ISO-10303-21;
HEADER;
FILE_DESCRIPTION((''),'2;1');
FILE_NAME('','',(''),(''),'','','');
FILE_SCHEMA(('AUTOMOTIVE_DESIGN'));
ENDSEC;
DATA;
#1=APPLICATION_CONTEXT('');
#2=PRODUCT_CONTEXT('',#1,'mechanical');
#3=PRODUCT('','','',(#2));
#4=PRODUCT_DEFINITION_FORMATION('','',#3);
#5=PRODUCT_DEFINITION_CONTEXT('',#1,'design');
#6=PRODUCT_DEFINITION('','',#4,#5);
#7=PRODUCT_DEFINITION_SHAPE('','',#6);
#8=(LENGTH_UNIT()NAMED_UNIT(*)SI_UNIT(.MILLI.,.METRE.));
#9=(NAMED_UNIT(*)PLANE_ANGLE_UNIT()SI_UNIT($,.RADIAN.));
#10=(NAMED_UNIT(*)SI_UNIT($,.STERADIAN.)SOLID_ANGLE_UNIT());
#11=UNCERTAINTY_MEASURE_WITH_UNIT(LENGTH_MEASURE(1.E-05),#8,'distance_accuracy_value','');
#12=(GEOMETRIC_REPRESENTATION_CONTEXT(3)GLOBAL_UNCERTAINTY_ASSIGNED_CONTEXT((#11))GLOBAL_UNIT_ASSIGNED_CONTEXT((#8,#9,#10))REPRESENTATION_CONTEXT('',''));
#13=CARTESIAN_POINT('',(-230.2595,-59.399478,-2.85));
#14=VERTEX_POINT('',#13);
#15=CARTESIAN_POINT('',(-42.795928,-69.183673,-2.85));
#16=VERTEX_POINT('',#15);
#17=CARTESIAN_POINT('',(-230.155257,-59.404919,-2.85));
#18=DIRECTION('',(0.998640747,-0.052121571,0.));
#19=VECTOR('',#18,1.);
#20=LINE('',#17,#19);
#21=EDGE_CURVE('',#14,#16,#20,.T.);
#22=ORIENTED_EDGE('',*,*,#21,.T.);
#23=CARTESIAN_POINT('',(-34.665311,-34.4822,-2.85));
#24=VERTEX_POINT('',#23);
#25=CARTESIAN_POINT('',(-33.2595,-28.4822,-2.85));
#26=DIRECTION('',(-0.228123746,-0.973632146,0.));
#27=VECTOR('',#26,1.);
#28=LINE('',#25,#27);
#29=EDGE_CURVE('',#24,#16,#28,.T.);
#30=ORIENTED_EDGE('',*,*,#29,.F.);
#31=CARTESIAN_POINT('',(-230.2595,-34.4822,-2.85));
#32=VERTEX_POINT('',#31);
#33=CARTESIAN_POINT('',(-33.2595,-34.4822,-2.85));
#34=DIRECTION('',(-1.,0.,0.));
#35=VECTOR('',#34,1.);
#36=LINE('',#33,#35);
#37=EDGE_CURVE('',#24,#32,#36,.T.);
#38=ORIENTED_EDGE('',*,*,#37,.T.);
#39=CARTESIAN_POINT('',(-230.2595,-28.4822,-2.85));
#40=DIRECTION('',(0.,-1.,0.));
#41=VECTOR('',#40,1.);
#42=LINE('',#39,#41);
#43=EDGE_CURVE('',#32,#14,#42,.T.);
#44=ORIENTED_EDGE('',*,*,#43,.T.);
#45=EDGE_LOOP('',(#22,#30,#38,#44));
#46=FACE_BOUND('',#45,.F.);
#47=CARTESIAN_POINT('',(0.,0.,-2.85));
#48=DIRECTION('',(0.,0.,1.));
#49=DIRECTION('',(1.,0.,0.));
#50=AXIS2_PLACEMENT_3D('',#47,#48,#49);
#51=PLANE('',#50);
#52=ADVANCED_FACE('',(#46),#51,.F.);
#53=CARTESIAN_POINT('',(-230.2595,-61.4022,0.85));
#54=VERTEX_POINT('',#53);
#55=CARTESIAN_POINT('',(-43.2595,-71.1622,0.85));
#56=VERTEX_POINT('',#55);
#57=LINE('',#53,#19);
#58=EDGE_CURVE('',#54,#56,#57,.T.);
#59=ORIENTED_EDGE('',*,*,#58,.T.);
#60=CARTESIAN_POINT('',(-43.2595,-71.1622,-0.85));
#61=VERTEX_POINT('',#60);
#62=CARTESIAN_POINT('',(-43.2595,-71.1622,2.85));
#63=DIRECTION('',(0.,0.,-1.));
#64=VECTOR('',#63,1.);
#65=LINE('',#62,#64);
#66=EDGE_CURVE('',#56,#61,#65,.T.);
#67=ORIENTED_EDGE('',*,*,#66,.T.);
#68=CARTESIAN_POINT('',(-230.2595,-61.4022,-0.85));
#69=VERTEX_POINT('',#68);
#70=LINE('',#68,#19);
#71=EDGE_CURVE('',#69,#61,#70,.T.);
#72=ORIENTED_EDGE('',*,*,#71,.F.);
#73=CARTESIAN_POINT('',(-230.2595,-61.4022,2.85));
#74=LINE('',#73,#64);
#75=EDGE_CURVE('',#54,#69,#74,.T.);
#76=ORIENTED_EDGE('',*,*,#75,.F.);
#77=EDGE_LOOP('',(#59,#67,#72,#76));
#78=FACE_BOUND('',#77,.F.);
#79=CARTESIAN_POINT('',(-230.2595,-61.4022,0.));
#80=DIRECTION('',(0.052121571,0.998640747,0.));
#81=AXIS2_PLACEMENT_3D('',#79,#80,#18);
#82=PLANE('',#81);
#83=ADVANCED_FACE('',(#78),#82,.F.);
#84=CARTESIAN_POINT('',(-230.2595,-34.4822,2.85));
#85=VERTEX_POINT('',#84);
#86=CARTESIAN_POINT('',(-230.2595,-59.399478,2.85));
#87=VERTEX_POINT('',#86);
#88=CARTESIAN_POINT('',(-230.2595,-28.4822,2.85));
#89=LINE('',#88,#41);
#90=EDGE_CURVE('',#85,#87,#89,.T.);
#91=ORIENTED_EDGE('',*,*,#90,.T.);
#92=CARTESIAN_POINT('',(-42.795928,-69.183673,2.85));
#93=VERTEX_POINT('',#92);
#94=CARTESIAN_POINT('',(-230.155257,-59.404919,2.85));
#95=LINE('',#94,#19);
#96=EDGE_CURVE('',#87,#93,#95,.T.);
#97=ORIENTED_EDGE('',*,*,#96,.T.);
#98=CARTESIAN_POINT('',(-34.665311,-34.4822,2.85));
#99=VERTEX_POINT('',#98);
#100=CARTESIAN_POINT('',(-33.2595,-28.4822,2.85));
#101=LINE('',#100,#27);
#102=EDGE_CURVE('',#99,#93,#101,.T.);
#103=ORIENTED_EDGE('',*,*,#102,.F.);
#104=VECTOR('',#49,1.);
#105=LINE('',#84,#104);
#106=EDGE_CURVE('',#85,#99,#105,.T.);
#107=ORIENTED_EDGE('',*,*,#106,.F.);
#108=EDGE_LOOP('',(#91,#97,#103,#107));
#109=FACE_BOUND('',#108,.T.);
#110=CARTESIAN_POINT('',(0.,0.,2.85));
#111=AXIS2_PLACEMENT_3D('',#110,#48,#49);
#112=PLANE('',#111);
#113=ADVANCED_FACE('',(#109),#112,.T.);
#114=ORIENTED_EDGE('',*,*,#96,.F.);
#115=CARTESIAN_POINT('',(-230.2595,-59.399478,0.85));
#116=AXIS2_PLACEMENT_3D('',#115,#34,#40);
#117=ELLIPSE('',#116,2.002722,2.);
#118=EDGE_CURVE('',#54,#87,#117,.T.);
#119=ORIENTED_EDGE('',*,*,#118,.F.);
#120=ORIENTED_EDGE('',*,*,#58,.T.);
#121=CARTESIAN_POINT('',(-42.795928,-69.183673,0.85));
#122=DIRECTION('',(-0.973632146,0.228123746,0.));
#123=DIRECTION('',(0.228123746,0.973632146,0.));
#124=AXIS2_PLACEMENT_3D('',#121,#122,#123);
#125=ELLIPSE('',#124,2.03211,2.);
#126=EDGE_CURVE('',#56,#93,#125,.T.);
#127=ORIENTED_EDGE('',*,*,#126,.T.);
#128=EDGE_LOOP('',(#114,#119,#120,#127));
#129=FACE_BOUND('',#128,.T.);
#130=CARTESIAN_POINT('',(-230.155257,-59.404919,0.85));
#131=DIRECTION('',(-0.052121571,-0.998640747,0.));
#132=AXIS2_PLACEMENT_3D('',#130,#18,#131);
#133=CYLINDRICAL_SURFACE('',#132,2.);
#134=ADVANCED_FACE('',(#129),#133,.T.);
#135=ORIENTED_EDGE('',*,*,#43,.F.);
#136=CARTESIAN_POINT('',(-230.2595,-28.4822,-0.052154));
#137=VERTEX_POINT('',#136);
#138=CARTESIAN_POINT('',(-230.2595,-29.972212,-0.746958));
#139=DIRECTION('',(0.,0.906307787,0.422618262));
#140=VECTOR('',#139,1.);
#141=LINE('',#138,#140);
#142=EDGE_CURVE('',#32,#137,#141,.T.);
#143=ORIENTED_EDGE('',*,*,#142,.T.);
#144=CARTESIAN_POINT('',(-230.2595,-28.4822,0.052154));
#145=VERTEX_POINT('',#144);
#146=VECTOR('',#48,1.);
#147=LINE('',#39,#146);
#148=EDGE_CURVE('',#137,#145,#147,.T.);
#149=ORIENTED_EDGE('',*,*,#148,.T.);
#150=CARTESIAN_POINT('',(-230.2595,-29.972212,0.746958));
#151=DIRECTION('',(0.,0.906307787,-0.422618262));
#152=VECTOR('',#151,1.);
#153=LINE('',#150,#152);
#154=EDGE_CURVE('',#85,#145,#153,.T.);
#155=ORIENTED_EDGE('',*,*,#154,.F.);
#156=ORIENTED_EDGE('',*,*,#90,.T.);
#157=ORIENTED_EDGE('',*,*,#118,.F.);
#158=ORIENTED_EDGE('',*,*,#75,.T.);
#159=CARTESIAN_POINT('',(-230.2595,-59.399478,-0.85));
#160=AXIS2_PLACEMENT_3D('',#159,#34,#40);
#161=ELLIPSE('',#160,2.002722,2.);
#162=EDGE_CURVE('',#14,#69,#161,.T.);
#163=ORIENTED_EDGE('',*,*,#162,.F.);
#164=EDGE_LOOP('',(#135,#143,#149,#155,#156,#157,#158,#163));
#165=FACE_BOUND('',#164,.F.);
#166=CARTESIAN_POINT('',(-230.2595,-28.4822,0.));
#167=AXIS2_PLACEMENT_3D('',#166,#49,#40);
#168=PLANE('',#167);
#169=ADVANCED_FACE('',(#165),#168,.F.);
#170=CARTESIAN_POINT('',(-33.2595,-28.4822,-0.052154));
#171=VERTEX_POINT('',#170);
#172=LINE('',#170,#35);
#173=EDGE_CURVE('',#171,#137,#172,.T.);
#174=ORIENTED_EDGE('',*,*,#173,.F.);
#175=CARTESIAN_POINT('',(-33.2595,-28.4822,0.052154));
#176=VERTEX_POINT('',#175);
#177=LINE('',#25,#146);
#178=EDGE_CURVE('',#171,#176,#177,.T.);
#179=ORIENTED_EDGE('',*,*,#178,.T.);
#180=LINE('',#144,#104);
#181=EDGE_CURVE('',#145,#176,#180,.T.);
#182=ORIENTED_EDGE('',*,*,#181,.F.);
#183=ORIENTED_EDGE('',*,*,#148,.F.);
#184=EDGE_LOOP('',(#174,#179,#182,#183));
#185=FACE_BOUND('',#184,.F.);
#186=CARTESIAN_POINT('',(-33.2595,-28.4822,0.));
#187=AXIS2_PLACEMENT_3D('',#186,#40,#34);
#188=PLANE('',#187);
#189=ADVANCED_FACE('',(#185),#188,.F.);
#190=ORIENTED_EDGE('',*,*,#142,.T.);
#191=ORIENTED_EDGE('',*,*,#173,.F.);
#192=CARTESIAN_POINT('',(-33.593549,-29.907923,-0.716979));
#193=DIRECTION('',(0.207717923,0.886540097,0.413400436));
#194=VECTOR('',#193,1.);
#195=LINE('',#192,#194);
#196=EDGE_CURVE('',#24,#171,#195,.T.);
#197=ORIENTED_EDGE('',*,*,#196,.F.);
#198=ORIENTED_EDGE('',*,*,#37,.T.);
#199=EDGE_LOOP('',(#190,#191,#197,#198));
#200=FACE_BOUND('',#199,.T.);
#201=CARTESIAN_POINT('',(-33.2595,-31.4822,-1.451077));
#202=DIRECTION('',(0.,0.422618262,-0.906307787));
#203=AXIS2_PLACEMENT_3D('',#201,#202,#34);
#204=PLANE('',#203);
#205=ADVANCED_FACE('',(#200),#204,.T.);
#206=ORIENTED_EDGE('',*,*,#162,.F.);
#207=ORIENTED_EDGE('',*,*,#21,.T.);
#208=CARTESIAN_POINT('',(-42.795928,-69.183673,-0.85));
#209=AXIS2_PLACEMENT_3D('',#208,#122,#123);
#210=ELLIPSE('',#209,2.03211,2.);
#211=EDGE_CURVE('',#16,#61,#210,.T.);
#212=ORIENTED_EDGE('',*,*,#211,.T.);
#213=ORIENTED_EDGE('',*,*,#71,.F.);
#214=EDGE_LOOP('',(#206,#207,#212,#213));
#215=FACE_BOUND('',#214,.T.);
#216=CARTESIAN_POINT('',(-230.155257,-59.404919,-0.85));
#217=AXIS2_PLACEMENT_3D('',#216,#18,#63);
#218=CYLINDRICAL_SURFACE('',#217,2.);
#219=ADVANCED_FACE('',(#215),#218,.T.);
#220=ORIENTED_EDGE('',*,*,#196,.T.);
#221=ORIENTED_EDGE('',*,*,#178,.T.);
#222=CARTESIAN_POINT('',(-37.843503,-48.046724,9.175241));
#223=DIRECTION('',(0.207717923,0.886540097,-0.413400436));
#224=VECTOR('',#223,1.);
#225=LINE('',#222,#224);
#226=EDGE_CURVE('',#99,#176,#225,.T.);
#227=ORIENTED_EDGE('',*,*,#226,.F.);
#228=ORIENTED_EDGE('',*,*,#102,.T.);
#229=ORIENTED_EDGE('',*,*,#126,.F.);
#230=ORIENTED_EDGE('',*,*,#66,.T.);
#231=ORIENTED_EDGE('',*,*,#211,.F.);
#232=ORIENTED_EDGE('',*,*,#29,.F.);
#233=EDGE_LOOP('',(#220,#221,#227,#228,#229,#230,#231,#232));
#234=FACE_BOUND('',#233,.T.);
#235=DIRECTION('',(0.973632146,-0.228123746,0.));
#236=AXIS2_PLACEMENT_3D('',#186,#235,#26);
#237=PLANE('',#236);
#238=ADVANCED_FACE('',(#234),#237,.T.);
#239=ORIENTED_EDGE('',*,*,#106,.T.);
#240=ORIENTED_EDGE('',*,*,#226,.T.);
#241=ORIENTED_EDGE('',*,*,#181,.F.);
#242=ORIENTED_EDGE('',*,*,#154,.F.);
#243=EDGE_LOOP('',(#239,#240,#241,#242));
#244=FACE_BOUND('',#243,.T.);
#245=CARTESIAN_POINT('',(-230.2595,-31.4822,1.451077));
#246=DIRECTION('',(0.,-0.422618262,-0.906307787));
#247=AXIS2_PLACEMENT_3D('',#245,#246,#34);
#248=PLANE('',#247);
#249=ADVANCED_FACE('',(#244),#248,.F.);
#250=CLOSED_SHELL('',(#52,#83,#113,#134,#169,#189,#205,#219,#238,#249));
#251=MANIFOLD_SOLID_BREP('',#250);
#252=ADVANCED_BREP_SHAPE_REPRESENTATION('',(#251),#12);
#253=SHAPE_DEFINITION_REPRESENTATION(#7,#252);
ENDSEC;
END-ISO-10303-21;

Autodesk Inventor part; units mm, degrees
ref_plane "YZ Plane" through (0, 0, 0) normal (1, 0, 0) x (0, 1, 0)
ref_plane "XZ Plane" through (0, 0, 0) normal (0, 1, 0) x (-1, 0, 0)
ref_plane "XY Plane" through (0, 0, 0) normal (0, 0, 1) x (1, 0, 0)
sketch "Sketch1" plane through (0, 0, 0) normal (0, 0, 1) x (1, 0, 0)
  line L0 (-23.2595, -28.4822) -> (192.7405, -28.4822)
  line L1 (-23.2595, -28.4822) -> (-13.2595, -28.4822)
  line L2 (-13.2595, -28.4822) -> (-3.2595, -28.4822)
  line L3 (-3.2595, -28.4822) -> (-3.2595, -71.1622)
  line L4 (-23.2595, -28.4822) -> (183.7405, -28.4822)
  line L5 (183.7405, -28.4822) -> (183.7405, -61.4022)
  line L6 (183.7405, -61.4022) -> (-3.2595, -71.1622)
  line L7 (-13.2595, -28.4822) -> (-3.2595, -71.1622)
  line L8 (183.7405, -28.4822) -> (183.7405, 26.1278)
  line L9 (-23.2595, -28.4822) -> (-23.2595, 82.8078)
  line L10 (-23.2595, 82.8078) -> (183.7405, 26.1278)
  line L11 (183.7405, 26.1278) -> (183.7405, 27.1278)
  line L12 (183.7405, 27.1278) -> (192.7405, 24.6634)
  line L13 (192.7405, -28.4822) -> (192.7405, 24.6634)
  line L14 (183.7405, -61.4022) -> (192.7405, -60.9325)
  line L15 (192.7405, -28.4822) -> (192.7405, -60.9325)
  line L16 (-23.2595, -28.4822) -> (-33.2595, -28.4822)
  line L17 (-33.2595, -28.4822) -> (-43.2595, -28.4822)
  line L18 (-23.2595, -28.4822) -> (-230.2595, -28.4822)
  line L19 (-230.2595, -28.4822) -> (-230.2595, -61.4022)
  line L20 (-43.2595, -28.4822) -> (-43.2595, -71.1622)
  line L21 (-230.2595, -61.4022) -> (-43.2595, -71.1622)
  line L22 (-33.2595, -28.4822) -> (-43.2595, -71.1622)
  line L23 (-239.2595, -28.4822) -> (-239.2595, -60.9325)
  line L24 (-230.2595, -61.4022) -> (-239.2595, -60.9325)
  line L25 (-23.2595, -28.4822) -> (-239.2595, -28.4822)
  line L26 (-239.2595, -28.4822) -> (-239.2595, 24.6634)
  line L27 (-230.2595, 27.1278) -> (-239.2595, 24.6634)
  line L28 (-230.2595, -28.4822) -> (-230.2595, 26.1278)
  line L29 (-230.2595, 26.1278) -> (-230.2595, 27.1278)
  line L30 (-23.2595, 82.8078) -> (-230.2595, 26.1278)
  point P0 (0, 0)
  dimension "d0" = 216
  dimension "d1" = 10
  dimension "d2" = 10
  dimension "d3" = 42.68
  dimension "d4" = 207
  dimension "d5" = 32.92
  dimension "d6" = 54.61
  dimension "d7" = 111.29
  dimension "d8" = 1
extrude "Extrusion1" add sketch "Sketch1" along normal mid plane 5.7 contours L22 L20 L17 | L20 L21 L19 L18
chamfer "Chamfer1" distance 6 angle 25 1 edges at (-131.7595, -28.4822, -2.85) measured on face at (-102.2595, -42.7089, -2.85)
fillet "Fillet1" radius 2 2 edges at (-136.7595, -66.2822, -2.85) (-136.7595, -66.2822, 2.85)
chamfer "Chamfer2" distance 6 angle 25 1 edges at (-131.7595, -28.4822, 2.85) measured on face at (-102.105, -42.0494, 2.85)
